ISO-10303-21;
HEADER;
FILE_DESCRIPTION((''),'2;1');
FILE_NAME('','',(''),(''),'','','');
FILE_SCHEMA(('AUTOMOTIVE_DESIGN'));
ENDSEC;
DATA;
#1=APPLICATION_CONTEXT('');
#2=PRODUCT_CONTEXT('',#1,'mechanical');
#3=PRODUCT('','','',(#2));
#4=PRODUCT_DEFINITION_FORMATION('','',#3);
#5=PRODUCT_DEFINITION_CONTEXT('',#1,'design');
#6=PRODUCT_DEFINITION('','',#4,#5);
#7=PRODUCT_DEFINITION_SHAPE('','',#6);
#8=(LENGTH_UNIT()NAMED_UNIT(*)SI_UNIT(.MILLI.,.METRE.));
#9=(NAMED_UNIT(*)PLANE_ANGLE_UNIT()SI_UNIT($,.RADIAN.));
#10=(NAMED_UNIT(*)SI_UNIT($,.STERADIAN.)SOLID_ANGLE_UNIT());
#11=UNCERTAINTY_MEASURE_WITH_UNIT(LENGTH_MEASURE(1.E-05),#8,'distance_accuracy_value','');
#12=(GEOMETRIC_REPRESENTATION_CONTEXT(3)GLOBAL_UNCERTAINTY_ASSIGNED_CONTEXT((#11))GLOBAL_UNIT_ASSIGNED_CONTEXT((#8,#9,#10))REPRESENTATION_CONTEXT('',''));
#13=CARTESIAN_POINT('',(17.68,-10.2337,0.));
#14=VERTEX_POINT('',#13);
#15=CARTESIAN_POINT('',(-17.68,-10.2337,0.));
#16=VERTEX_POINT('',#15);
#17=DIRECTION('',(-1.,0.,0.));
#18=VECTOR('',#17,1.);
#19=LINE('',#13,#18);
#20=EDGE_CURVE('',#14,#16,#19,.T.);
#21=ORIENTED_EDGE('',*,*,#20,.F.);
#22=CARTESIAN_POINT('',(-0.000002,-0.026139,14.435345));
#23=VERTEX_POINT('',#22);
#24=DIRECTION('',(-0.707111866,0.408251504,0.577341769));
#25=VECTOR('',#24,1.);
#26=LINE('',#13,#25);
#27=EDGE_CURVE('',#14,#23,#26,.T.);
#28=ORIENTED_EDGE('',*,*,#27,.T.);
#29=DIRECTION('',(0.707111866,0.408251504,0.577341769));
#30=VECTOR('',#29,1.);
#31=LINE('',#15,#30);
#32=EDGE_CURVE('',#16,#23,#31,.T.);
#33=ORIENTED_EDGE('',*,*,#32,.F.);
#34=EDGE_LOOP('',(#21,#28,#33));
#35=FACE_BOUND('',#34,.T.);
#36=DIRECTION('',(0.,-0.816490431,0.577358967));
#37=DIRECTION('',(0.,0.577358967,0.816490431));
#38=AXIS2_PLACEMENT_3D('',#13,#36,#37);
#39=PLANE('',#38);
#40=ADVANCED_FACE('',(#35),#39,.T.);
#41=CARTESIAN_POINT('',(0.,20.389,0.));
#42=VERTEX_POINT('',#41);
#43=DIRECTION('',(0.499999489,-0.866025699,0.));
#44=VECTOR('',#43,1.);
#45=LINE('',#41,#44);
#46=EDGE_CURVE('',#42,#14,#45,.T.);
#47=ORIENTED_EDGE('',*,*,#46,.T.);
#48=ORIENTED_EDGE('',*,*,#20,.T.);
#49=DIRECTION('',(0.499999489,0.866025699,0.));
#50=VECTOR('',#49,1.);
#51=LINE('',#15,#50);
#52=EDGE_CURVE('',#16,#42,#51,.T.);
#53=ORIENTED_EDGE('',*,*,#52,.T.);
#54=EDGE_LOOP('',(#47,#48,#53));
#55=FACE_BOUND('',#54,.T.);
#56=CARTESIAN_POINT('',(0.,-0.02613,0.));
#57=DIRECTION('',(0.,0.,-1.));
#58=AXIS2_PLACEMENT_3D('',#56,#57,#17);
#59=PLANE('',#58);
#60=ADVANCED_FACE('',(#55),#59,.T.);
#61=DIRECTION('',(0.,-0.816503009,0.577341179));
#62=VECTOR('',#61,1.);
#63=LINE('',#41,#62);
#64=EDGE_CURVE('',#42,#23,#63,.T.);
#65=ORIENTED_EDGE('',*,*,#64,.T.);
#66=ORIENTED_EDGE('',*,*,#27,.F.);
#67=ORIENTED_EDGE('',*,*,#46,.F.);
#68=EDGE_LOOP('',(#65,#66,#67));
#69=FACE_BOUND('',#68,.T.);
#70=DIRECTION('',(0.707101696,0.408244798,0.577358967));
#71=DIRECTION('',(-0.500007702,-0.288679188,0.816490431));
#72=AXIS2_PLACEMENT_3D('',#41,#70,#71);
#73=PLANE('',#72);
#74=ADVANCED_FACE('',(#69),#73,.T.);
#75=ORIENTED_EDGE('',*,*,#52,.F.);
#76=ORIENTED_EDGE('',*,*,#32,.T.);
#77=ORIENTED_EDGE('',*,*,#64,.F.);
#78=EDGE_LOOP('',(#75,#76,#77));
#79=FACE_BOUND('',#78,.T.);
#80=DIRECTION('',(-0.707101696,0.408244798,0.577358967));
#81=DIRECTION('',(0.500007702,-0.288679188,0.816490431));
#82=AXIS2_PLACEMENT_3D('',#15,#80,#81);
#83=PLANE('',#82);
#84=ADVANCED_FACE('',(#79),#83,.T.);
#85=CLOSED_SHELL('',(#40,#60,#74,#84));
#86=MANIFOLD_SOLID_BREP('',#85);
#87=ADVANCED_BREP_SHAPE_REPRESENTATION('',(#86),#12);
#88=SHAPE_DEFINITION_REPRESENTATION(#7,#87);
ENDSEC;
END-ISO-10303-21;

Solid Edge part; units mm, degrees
sketch "Sketch1" plane through (0, 0, 0) normal (0, 0, 1) x (1, 0, 0)
  line L0 (-17.68, -10.2337) -> (0, 20.389)
  line L1 (0, 20.389) -> (17.68, -10.2337)
  line L2 (17.68, -10.2337) -> (-17.68, -10.2337)
  dimension "D1" = 35.36
extrude "Ajout_matière_1" add sketch "Sketch1" along normal blind 15 draft 35.265
properties material "Acier S235"
